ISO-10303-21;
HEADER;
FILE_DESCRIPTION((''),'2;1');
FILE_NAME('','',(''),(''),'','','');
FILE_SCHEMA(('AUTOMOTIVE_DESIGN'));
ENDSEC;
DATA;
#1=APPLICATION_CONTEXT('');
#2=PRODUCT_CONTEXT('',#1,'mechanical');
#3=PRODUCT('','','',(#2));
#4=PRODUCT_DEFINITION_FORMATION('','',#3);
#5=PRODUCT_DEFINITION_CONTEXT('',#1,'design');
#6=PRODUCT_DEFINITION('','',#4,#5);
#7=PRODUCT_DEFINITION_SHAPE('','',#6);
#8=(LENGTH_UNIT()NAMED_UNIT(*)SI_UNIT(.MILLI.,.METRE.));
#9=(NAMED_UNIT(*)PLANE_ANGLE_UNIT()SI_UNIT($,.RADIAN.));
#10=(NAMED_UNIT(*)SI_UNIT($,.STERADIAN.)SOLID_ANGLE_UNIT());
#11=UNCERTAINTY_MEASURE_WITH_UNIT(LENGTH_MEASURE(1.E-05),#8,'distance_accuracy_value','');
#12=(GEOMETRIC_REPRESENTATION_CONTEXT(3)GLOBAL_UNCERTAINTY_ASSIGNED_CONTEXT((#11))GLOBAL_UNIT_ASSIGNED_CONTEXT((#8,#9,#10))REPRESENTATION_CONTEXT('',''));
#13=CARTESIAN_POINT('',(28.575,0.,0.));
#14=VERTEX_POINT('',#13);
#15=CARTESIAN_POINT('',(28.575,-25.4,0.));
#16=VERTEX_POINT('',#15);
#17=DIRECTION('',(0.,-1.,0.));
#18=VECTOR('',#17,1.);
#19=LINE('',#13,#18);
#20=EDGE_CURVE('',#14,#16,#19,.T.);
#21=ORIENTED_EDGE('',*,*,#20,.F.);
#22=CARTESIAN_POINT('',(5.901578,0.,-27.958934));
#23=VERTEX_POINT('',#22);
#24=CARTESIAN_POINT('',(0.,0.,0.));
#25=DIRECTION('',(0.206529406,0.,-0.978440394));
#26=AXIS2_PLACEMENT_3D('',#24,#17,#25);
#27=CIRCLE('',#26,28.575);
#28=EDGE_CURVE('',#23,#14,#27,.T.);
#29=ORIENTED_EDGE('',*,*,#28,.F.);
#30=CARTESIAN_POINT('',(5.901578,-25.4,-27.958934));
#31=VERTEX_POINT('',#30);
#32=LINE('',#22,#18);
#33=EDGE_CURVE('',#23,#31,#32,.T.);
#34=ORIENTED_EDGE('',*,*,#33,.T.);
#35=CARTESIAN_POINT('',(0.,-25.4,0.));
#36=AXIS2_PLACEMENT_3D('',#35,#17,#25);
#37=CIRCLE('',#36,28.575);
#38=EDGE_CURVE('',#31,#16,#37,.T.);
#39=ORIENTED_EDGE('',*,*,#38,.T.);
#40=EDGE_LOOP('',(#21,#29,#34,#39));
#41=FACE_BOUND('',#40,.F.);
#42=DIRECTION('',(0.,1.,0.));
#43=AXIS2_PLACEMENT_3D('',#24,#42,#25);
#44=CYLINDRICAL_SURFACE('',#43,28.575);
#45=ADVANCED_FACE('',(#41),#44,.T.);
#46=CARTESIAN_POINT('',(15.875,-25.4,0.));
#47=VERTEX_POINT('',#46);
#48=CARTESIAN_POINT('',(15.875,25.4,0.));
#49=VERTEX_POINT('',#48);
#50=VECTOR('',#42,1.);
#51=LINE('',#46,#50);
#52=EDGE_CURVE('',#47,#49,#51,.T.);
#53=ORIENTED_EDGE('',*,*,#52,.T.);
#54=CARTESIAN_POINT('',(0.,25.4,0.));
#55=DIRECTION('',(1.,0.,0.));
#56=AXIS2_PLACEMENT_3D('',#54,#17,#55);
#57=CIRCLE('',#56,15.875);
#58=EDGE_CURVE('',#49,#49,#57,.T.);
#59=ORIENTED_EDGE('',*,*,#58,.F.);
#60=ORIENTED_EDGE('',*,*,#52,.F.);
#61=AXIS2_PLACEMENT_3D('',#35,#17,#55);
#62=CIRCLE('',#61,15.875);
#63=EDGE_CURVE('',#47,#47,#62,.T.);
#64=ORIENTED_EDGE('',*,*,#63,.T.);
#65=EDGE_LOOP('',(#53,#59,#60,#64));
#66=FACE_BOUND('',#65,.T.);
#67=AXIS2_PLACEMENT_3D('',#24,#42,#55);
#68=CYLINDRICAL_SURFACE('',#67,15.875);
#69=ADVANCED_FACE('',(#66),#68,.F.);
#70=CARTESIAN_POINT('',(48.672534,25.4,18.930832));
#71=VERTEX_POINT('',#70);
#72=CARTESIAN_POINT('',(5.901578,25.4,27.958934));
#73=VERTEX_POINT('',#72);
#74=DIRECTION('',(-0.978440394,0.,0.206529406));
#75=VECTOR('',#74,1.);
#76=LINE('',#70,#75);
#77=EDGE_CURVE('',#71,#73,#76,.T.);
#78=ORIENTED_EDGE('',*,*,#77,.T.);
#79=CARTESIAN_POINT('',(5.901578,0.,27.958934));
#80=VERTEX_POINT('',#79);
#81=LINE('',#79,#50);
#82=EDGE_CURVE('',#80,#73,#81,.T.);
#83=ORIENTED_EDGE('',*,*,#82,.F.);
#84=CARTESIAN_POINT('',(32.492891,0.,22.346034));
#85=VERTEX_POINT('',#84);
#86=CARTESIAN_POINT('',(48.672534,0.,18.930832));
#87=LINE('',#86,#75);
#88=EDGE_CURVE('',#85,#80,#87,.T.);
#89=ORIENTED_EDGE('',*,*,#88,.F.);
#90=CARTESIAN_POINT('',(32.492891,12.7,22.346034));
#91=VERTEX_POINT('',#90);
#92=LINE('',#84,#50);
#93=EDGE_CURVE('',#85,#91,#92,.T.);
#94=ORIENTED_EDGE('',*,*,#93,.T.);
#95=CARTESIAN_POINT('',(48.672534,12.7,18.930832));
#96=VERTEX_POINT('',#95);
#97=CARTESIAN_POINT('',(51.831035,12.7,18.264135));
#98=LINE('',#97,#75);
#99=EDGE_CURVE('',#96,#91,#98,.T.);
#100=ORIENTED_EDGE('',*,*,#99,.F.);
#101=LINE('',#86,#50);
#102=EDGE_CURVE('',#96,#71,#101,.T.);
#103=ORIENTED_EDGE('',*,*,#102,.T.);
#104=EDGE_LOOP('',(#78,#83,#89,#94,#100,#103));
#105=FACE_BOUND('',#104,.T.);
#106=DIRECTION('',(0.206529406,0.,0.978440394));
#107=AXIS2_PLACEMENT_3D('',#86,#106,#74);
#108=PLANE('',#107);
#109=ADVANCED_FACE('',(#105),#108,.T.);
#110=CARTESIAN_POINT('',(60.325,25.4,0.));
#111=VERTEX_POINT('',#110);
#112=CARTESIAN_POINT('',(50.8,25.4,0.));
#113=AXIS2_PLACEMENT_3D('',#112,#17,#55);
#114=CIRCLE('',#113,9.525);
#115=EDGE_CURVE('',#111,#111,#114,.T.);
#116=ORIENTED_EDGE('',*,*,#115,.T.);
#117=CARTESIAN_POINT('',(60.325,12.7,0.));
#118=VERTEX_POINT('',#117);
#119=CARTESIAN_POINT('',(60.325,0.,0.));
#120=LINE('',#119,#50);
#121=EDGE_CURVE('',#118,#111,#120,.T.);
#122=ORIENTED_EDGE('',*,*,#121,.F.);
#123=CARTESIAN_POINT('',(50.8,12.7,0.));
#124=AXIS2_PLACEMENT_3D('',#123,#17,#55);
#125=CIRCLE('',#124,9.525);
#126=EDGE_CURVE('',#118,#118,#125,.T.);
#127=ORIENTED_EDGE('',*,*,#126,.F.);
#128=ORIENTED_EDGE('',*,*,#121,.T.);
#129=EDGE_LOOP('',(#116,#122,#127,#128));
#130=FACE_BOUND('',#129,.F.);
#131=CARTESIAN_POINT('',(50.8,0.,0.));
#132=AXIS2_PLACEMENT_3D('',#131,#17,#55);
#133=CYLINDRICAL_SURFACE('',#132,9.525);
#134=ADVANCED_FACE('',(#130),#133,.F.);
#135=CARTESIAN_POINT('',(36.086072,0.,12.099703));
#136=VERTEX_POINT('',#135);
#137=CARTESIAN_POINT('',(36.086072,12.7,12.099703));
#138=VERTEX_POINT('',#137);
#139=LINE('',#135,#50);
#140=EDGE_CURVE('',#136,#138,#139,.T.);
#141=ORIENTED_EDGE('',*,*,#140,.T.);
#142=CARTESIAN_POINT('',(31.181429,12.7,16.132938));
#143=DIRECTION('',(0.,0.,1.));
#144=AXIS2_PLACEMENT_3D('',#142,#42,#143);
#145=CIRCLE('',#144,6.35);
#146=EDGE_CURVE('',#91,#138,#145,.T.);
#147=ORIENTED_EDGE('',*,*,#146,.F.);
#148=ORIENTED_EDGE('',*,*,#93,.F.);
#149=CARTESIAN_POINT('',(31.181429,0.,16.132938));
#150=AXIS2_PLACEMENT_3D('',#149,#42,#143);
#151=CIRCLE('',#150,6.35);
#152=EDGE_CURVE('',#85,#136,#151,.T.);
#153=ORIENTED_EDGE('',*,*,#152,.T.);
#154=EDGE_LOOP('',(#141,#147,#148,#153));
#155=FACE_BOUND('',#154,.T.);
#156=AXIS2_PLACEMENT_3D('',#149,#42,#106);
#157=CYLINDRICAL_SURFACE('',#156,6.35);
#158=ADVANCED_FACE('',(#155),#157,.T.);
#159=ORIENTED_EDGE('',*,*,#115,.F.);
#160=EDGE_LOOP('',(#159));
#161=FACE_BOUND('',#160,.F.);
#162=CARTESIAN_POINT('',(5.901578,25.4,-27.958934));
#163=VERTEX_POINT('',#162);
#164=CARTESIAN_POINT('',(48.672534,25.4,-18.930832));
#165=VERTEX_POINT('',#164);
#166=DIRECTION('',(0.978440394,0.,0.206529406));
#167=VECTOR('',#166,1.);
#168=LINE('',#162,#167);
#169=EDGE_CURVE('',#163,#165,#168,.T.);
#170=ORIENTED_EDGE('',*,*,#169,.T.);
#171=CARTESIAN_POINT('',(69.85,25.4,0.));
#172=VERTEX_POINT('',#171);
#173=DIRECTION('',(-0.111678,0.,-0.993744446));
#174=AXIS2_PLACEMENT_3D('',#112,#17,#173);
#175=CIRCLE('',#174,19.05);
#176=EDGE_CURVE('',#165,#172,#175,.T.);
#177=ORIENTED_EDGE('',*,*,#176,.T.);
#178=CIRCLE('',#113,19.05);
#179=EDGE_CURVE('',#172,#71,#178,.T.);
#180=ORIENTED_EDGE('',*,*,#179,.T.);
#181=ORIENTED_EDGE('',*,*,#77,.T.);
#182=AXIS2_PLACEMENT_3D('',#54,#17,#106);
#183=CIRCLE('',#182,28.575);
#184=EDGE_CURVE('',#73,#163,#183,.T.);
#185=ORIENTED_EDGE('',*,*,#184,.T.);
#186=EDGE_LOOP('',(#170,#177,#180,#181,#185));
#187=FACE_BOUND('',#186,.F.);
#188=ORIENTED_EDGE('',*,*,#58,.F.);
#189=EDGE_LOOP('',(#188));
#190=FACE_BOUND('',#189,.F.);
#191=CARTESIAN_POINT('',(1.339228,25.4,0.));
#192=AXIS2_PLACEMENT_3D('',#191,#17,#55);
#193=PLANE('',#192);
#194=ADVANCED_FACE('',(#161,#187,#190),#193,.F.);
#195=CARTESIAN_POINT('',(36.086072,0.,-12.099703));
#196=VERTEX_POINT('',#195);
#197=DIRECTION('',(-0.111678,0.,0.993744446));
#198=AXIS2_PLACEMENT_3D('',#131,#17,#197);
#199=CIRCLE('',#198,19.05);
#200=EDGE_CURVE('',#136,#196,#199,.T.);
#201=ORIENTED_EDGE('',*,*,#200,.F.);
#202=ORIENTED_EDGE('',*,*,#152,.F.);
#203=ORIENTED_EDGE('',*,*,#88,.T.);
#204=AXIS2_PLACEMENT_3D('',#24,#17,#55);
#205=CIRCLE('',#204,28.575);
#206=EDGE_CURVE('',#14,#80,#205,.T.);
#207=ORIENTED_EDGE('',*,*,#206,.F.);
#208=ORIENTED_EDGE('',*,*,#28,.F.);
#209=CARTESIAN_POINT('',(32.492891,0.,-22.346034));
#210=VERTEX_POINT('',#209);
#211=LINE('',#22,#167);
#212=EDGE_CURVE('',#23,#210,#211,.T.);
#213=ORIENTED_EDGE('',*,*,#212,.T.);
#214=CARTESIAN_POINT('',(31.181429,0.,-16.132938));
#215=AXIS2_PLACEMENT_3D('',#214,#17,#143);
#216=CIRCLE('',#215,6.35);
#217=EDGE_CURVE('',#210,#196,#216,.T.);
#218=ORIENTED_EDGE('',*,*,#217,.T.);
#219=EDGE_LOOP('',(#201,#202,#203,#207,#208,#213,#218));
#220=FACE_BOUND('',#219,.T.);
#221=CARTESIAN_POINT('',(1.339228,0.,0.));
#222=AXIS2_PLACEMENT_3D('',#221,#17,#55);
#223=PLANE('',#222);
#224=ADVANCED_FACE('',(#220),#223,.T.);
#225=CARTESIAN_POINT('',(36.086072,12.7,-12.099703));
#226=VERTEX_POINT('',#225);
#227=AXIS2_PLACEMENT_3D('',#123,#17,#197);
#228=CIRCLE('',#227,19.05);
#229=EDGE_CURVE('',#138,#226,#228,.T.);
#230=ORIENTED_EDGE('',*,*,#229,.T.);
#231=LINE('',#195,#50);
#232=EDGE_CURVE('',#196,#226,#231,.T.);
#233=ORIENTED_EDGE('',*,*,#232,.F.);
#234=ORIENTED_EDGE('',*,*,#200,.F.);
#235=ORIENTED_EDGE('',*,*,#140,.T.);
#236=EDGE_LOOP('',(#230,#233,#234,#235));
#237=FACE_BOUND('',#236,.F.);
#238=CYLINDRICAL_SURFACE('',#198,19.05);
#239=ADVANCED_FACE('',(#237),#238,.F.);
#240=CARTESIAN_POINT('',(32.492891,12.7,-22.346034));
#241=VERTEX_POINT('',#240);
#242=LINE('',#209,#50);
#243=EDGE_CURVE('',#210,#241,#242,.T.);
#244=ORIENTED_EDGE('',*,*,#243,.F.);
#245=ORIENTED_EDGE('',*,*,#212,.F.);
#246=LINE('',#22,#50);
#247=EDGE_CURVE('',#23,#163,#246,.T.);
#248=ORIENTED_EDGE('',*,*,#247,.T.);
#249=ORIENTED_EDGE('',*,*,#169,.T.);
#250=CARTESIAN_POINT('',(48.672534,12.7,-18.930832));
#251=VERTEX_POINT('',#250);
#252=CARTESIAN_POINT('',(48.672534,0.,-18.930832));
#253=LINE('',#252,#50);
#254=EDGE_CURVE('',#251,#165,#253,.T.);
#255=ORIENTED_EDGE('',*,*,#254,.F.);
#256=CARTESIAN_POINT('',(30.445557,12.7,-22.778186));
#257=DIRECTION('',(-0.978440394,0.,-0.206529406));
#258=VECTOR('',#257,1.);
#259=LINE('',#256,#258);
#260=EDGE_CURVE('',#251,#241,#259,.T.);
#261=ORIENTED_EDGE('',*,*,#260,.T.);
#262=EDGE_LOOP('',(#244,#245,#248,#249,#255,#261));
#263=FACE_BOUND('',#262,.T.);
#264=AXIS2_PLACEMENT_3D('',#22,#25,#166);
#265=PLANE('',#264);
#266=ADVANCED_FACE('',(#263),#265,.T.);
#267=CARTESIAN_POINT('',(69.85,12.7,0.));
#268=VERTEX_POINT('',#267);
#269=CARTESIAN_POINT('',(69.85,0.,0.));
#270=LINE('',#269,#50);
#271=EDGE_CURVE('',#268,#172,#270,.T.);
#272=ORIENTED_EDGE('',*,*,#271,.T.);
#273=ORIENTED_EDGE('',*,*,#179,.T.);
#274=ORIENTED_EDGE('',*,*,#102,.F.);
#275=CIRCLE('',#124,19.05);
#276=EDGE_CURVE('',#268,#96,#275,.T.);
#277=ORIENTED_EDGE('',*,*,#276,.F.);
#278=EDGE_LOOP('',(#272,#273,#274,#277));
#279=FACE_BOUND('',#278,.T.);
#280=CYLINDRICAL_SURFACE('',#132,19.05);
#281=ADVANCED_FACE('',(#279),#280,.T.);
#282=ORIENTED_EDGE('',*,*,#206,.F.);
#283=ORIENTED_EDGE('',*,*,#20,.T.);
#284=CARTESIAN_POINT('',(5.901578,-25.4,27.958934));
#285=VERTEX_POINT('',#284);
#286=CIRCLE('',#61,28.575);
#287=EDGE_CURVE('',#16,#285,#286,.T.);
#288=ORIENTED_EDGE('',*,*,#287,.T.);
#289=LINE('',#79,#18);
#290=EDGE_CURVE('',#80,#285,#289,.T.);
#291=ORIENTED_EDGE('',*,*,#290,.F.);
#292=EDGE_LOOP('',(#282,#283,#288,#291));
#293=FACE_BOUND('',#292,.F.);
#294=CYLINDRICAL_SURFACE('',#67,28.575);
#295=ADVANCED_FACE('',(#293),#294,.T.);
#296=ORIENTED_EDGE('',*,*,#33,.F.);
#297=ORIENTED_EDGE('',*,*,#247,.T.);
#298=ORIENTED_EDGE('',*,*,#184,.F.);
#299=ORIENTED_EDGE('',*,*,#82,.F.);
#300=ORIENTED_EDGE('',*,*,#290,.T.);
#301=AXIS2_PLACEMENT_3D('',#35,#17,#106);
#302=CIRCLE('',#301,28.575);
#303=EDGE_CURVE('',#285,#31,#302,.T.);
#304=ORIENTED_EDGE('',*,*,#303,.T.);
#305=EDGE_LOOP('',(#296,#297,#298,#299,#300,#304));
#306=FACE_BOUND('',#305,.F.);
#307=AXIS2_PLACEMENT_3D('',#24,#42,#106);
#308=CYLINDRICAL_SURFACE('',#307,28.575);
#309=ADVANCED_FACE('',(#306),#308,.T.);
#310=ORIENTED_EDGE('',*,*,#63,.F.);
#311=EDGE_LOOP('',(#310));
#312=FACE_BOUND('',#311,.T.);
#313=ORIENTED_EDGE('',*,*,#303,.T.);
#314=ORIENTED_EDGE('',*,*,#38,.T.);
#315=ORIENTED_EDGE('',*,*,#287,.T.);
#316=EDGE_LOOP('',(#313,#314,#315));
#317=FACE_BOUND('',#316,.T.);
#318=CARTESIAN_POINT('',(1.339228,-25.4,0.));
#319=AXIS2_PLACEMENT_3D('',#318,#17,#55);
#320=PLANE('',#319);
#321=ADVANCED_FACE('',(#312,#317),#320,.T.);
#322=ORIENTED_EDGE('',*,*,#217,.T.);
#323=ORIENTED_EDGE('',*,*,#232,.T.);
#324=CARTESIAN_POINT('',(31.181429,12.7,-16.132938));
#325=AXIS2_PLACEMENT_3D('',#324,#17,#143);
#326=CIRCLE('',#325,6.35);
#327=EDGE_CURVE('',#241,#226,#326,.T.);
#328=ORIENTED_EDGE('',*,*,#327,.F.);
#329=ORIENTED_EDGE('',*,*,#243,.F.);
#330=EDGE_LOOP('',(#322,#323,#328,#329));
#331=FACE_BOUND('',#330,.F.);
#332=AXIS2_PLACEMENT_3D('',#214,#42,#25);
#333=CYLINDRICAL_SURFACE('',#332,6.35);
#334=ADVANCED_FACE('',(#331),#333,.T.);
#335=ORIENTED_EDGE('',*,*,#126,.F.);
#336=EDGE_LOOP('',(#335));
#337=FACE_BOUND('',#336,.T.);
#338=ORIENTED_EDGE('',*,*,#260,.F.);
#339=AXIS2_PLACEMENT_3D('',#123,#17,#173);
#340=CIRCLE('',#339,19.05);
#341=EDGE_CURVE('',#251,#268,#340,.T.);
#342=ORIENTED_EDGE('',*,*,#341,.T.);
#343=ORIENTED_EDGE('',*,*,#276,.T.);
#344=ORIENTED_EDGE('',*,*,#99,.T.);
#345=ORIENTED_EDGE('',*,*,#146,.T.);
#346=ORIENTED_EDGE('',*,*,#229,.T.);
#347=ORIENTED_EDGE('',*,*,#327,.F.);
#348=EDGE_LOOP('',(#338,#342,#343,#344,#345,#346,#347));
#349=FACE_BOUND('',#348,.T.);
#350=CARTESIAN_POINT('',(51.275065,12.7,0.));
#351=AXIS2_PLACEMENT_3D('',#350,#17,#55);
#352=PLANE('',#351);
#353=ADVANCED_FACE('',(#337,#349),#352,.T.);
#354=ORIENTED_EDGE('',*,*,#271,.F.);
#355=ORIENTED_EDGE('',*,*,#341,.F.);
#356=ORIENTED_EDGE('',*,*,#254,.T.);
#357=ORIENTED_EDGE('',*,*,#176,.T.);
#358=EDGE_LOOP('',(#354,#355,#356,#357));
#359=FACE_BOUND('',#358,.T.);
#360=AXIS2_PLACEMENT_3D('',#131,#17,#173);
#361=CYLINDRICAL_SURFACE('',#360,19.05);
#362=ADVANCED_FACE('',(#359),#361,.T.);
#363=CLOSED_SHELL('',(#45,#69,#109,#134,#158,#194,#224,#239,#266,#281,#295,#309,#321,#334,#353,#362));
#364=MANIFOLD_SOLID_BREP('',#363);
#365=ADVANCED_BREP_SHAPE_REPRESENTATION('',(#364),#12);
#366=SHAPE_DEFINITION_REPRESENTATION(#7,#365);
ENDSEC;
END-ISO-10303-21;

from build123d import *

# Parameters (mm, degrees)
F0_R     = 15.875
F0_R_2   = 9.525
F1_DEPTH = 25.4
F2_DEPTH = 25.4
F3_DEPTH = 12.7
F4_R     = 6.35


with BuildPart() as f1:
    # F0 (on Front) → F1 (new body)
    with BuildSketch(Plane.XZ):
        with BuildLine():
            ThreePointArc((5.9015777881, -27.9589342538), (22.1942358541, -17.998514379), (28.575, 0))
            ThreePointArc((28.575, 0), (22.1942358541, 17.998514379), (5.9015777881, 27.9589342538))
            ThreePointArc((5.9015777881, 27.9589342538), (-28.575, 0), (5.9015777881, -27.9589342538))
        make_face()
        Circle(F0_R, mode=Mode.SUBTRACT)
        with BuildLine():
            ThreePointArc((5.9015777881, 27.9589342538), (22.1942358541, 17.998514379), (28.575, 0))
            ThreePointArc((28.575, 0), (22.1942358541, -17.998514379), (5.9015777881, -27.9589342538))
            Line((5.9015777881, -27.9589342538), (48.6725341, -18.9308316998))
            ThreePointArc((48.6725341, -18.9308316998), (31.75, 0), (48.6725341, 18.9308316998))
            Line((48.6725341, 18.9308316998), (5.9015777881, 27.9589342538))
        make_face()
        with BuildLine():
            ThreePointArc((69.85, 0), (63.4959496416, 14.2026533682), (48.6725341, 18.9308316998))
            ThreePointArc((48.6725341, 18.9308316998), (31.75, 0), (48.6725341, -18.9308316998))
            ThreePointArc((48.6725341, -18.9308316998), (63.4959496416, -14.2026533682), (69.85, 0))
        make_face()
        with Locations((50.8, 0)):
            Circle(F0_R_2, mode=Mode.SUBTRACT)
    extrude(amount=-F1_DEPTH)

    # F0 (on Front) → F2 (join)
    with BuildSketch(Plane.XZ):
        with BuildLine():
            ThreePointArc((5.9015777881, -27.9589342538), (22.1942358541, -17.998514379), (28.575, 0))
            ThreePointArc((28.575, 0), (22.1942358541, 17.998514379), (5.9015777881, 27.9589342538))
            ThreePointArc((5.9015777881, 27.9589342538), (-28.575, 0), (5.9015777881, -27.9589342538))
        make_face()
        Circle(F0_R, mode=Mode.SUBTRACT)
    extrude(amount=F2_DEPTH)

    # F0 (on Front) → F3 (cut)
    with BuildSketch(Plane.XZ):
        with BuildLine():
            ThreePointArc((69.85, 0), (63.4959496416, 14.2026533682), (48.6725341, 18.9308316998))
            ThreePointArc((48.6725341, 18.9308316998), (31.75, 0), (48.6725341, -18.9308316998))
            ThreePointArc((48.6725341, -18.9308316998), (63.4959496416, -14.2026533682), (69.85, 0))
        make_face()
        with Locations((50.8, 0)):
            Circle(F0_R_2, mode=Mode.SUBTRACT)
    extrude(amount=-F3_DEPTH, mode=Mode.SUBTRACT)

    # F4
    f4_edges = [f1.edges().sort_by_distance(p)[0] for p in [
        (48.672534, 6.35, -18.930832),
        (48.672534, 6.35, 18.930832),
    ]]
    fillet(f4_edges, radius=F4_R)


solid = f1.part
